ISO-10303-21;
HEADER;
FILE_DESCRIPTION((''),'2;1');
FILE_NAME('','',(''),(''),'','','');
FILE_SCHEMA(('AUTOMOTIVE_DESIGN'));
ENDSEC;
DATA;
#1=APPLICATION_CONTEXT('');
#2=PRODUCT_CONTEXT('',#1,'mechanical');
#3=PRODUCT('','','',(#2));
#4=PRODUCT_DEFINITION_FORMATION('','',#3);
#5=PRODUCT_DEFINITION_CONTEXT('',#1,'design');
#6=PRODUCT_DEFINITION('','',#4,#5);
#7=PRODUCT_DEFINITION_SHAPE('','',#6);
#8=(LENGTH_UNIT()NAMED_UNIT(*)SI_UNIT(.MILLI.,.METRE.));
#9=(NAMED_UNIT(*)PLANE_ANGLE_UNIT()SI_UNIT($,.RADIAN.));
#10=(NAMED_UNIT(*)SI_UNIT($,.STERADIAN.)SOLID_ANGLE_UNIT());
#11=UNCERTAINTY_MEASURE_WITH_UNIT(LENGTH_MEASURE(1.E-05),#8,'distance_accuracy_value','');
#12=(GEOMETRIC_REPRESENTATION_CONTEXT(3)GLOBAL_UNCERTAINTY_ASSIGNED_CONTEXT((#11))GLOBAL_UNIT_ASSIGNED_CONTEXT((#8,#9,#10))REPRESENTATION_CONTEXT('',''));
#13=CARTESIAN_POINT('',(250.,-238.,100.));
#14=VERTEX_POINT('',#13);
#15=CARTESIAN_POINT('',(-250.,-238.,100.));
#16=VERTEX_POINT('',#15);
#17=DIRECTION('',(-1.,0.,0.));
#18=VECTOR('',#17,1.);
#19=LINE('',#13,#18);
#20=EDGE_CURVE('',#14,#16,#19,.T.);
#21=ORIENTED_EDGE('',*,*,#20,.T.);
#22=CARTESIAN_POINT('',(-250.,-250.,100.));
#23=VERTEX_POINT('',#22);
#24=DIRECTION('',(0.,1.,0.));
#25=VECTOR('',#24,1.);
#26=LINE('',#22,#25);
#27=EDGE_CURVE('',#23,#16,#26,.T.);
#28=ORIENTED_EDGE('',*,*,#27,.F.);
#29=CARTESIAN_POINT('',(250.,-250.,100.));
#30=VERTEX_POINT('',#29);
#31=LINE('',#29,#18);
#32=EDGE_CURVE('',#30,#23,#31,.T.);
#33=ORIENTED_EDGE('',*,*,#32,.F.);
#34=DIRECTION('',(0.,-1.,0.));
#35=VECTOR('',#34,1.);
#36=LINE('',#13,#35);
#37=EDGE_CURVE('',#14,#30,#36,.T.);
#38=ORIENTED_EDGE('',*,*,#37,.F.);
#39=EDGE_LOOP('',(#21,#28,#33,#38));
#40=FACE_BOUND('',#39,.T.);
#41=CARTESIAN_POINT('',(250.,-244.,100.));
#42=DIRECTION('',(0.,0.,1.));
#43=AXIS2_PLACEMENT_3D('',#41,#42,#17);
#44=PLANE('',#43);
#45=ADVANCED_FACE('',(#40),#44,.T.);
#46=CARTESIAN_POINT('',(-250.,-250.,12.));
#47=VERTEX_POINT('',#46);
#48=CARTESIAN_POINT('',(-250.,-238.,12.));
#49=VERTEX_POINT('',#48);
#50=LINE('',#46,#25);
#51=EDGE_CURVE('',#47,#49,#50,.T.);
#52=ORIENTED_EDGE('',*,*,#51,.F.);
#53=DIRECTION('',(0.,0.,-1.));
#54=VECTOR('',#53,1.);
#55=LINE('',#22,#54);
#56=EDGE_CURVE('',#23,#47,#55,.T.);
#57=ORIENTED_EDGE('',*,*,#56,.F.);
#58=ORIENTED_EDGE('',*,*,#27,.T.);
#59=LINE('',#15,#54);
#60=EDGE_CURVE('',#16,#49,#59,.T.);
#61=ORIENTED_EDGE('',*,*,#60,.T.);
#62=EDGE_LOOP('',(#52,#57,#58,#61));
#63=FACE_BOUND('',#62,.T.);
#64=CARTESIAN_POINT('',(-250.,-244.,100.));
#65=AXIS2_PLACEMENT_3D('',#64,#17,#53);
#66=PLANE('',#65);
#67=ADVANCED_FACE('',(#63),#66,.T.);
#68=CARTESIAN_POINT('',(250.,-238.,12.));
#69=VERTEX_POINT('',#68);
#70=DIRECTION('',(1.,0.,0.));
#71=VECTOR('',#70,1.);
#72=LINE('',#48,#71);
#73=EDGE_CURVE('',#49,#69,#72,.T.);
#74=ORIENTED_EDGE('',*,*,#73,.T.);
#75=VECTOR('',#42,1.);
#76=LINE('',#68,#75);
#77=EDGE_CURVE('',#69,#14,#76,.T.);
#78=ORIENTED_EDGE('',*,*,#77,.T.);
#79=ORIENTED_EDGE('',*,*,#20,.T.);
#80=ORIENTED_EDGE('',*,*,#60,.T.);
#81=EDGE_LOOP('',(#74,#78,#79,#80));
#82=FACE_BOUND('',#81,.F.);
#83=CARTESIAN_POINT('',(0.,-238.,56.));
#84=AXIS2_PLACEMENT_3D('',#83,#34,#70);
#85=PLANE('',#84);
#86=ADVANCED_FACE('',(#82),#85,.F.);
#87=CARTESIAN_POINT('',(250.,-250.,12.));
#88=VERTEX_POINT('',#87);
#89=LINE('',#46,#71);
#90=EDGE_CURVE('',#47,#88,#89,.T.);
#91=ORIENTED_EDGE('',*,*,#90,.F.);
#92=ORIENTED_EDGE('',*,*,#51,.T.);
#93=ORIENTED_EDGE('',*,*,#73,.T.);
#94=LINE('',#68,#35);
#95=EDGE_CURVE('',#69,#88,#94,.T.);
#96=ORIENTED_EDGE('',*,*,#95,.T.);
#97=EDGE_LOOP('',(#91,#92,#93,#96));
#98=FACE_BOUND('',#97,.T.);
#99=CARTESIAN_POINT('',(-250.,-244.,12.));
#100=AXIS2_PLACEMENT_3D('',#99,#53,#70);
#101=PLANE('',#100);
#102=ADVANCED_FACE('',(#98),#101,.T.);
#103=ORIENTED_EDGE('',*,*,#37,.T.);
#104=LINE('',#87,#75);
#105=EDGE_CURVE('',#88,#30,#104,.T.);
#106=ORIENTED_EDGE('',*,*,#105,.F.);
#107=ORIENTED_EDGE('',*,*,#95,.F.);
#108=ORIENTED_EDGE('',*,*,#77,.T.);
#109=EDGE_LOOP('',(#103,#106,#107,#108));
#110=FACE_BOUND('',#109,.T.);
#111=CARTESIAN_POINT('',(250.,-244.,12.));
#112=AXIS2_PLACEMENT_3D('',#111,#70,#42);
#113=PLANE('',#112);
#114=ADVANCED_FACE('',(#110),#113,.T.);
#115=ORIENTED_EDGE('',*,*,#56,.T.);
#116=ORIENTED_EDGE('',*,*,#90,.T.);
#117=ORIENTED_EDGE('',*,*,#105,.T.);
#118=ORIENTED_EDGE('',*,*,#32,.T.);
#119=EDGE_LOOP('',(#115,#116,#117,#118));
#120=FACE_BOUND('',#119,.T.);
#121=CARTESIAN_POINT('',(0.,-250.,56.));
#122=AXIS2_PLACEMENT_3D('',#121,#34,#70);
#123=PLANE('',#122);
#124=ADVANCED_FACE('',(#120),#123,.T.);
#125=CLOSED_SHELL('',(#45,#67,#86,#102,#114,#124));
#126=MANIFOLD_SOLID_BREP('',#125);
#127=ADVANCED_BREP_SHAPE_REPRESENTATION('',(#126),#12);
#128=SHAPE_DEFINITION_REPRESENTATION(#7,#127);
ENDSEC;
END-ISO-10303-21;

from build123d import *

# Parameters (mm, degrees)
F0_W      = 500
F0_H      = 500
F1_DEPTH  = 12
F2_W      = 500
F2_H      = 50
F3_DEPTH  = 6
F6_DEPTH  = 6
F14_DEPTH = 6
F15_R     = 19.99999
F19_DEPTH = 6
F22_DEPTH = 12
F25_DEPTH = 6
F27_W     = 12
F27_H     = 320
F28_DEPTH = 44
F31_W     = 196
F31_H     = 12
F32_DEPTH = 44
F37_DEPTH = 3
F43_DEPTH = 12


# Not quite as in the source:
# - a fillet or chamfer is up to 0.001 mm smaller than in the source, because OpenCascade refuses the exact size


with BuildPart() as f1:
    # F0 (on Top) → F1 (new body)
    with BuildSketch(Plane.XY):
        Rectangle(F0_W, F0_H)
    extrude(amount=F1_DEPTH)


with BuildPart() as f3:
    # F2 (on Right) → F3 (new body, symmetric)
    with BuildSketch(Plane.YZ):
        Rectangle(F2_W, F2_H)
    extrude(amount=F3_DEPTH, both=True)


with BuildPart() as f3_1:
    # F4: moved
    add(f3.part.moved(Location((0, 0, -25))))


with BuildPart() as f6:
    # F5 (on Front) → F6 (new body, symmetric)
    with BuildSketch(Plane.XZ):
        Polygon((-250, -25), (250, -25), (250, 25), (6, 25), (6, 0), (-6, 0), (-6, 25), (-250, 25), align=None)
    extrude(amount=F6_DEPTH, both=True)


with BuildPart() as f6_1:
    # F7: moved
    add(f6.part.moved(Location((0, 80, -25))))


with BuildPart() as f8_1:
    # F8: copy of F6
    add(f6_1.part)


with BuildPart() as f3_2:
    add(f3_1.part)

    # F10: cut F6
    add(f6_1.part, mode=Mode.SUBTRACT)


with BuildPart() as f11_1:
    # F11: copy of F6
    add(f6_1.part.moved(Location((0, 164, 0))))


with BuildPart() as f3_3:
    add(f3_2.part)

    # F12: cut F11_1
    add(f11_1.part, mode=Mode.SUBTRACT)


with BuildPart() as f14:
    # F13 (on Right) → F14 (new body, symmetric)
    with BuildSketch(Plane.YZ):
        Polygon((250, -50), (250, 0), (250, 452), (70, 452), (-110, 452), (-250, 100), (-250, -50), align=None)
        Polygon((0, 412), (70, 412), (140, 412), (140, 372), (0, 372), align=None, mode=Mode.SUBTRACT)
    extrude(amount=F14_DEPTH, both=True)

    # F15 (radius 20 in the source; OpenCascade refuses exactly that, so slightly less here)
    f15_edges = [f14.edges().sort_by_distance(p)[0] for p in [
        (0, 140, 372),
        (0, 140, 412),
        (0, 0, 412),
        (0, 0, 372),
    ]]
    fillet(f15_edges, radius=F15_R)


with BuildPart() as f14_1:
    # F16: moved
    add(f14.part.moved(Location((-256, 0, 0))))


with BuildPart() as f17_1:
    # F17: copy of F14
    add(f14_1.part.moved(Location((512, 0, 0))))


with BuildPart() as f19:
    # F18 (on Front) → F19 (new body, symmetric)
    with BuildSketch(Plane.XZ):
        Polygon((-262, 452), (-262, 0), (-262, -50), (262, -50), (262, 452), align=None)
    extrude(amount=F19_DEPTH, both=True)


with BuildPart() as f19_1:
    # F20: moved
    add(f19.part.moved(Location((0, 256, 0))))


with BuildPart() as f22:
    # F21 (on face) → F22 (new body)
    with BuildSketch(Plane.XY.offset(12)):
        Polygon((262, 262), (0, 262), (-262, 262), (-262, -110), (262, -110), align=None)
    extrude(amount=F22_DEPTH)


with BuildPart() as f22_1:
    # F23: moved
    add(f22.part.moved(Location((0, 0, 440))))


with BuildPart() as f25:
    # F24 (on Front) → F25 (new body, symmetric)
    with BuildSketch(Plane.XZ):
        Polygon((-250, 12), (0, 12), (250, 12), (250, 100), (-250, 100), align=None)
    extrude(amount=F25_DEPTH, both=True)


with BuildPart() as f25_1:
    # F26: moved
    add(f25.part.moved(Location((0, -244, 0))))


with BuildPart() as f28:
    # F27 (on Top) → F28 (new body)
    with BuildSketch(Plane.XY):
        with Locations((-24, -90)):
            Rectangle(F27_W, F27_H)
    extrude(amount=F28_DEPTH)


with BuildPart() as f28_1:
    # F29: moved
    add(f28.part.moved(Location((0, 0, -48))))


with BuildPart() as f30_1:
    # F30: copy of F28
    add(f28_1.part.moved(Location((-208, 0, 0))))


with BuildPart() as f32:
    # F31 (on Top) → F32 (new body)
    with BuildSketch(Plane.XY):
        with Locations((-128, -244)):
            Rectangle(F31_W, F31_H)
    extrude(amount=-F32_DEPTH)


with BuildPart() as f32_1:
    # F33: moved
    add(f32.part.moved(Location((0, 0, -4))))


with BuildPart() as f34_1:
    # F34: copy of F32
    add(f32_1.part.moved(Location((0, 308, 0))))


with BuildPart() as f35_1:
    # F35: copy of F32
    add(f32_1.part.moved(Location((256, 0, 0))))


with BuildPart() as f35_2:
    # F35: copy of F30_1
    add(f30_1.part.moved(Location((256, 0, 0))))


with BuildPart() as f35_3:
    # F35: copy of F28
    add(f28_1.part.moved(Location((256, 0, 0))))


with BuildPart() as f35_4:
    # F35: copy of F34_1
    add(f34_1.part.moved(Location((256, 0, 0))))


with BuildPart() as f37:
    # F36 (on Top) → F37 (new body)
    with BuildSketch(Plane.XY):
        Polygon((-24, -244), (-24, 0), (-24, 64), (-232, 64), (-232, -244), align=None)
    extrude(amount=F37_DEPTH)


with BuildPart() as f37_1:
    # F38: moved
    add(f37.part.moved(Location((0, 0, -44))))


with BuildPart() as f39_1:
    # F39: copy of F37
    add(f37_1.part.moved(Location((256, 0, 0))))


with BuildPart() as f30_1_1:
    add(f30_1.part)

    # F40: cut F37
    add(f37_1.part, mode=Mode.SUBTRACT)


with BuildPart() as f32_2:
    add(f32_1.part)

    # F40: cut F37
    add(f37_1.part, mode=Mode.SUBTRACT)


with BuildPart() as f28_2:
    add(f28_1.part)

    # F40: cut F37
    add(f37_1.part, mode=Mode.SUBTRACT)


with BuildPart() as f34_1_1:
    add(f34_1.part)

    # F40: cut F37
    add(f37_1.part, mode=Mode.SUBTRACT)


with BuildPart() as f35_1_1:
    add(f35_1.part)

    # F41: cut F39_1
    add(f39_1.part, mode=Mode.SUBTRACT)


with BuildPart() as f35_3_1:
    add(f35_3.part)

    # F41: cut F39_1
    add(f39_1.part, mode=Mode.SUBTRACT)


with BuildPart() as f35_4_1:
    add(f35_4.part)

    # F41: cut F39_1
    add(f39_1.part, mode=Mode.SUBTRACT)


with BuildPart() as f35_2_1:
    add(f35_2.part)

    # F41: cut F39_1
    add(f39_1.part, mode=Mode.SUBTRACT)


with BuildPart() as f43:
    # F42 (on Front) → F43 (new body)
    with BuildSketch(Plane.XZ):
        Polygon((0, 12), (0, 0), (0, -50), (262, -50), (262, 12), align=None)
    extrude(amount=F43_DEPTH)


with BuildPart() as f43_1:
    # F44: moved
    add(f43.part.moved(Location((0, -250, 0))))


with BuildPart() as f45_1:
    # F45: copy of F43
    add(f43_1.part.moved(Location((-262, 0, 0))))


solid = f25_1.part
